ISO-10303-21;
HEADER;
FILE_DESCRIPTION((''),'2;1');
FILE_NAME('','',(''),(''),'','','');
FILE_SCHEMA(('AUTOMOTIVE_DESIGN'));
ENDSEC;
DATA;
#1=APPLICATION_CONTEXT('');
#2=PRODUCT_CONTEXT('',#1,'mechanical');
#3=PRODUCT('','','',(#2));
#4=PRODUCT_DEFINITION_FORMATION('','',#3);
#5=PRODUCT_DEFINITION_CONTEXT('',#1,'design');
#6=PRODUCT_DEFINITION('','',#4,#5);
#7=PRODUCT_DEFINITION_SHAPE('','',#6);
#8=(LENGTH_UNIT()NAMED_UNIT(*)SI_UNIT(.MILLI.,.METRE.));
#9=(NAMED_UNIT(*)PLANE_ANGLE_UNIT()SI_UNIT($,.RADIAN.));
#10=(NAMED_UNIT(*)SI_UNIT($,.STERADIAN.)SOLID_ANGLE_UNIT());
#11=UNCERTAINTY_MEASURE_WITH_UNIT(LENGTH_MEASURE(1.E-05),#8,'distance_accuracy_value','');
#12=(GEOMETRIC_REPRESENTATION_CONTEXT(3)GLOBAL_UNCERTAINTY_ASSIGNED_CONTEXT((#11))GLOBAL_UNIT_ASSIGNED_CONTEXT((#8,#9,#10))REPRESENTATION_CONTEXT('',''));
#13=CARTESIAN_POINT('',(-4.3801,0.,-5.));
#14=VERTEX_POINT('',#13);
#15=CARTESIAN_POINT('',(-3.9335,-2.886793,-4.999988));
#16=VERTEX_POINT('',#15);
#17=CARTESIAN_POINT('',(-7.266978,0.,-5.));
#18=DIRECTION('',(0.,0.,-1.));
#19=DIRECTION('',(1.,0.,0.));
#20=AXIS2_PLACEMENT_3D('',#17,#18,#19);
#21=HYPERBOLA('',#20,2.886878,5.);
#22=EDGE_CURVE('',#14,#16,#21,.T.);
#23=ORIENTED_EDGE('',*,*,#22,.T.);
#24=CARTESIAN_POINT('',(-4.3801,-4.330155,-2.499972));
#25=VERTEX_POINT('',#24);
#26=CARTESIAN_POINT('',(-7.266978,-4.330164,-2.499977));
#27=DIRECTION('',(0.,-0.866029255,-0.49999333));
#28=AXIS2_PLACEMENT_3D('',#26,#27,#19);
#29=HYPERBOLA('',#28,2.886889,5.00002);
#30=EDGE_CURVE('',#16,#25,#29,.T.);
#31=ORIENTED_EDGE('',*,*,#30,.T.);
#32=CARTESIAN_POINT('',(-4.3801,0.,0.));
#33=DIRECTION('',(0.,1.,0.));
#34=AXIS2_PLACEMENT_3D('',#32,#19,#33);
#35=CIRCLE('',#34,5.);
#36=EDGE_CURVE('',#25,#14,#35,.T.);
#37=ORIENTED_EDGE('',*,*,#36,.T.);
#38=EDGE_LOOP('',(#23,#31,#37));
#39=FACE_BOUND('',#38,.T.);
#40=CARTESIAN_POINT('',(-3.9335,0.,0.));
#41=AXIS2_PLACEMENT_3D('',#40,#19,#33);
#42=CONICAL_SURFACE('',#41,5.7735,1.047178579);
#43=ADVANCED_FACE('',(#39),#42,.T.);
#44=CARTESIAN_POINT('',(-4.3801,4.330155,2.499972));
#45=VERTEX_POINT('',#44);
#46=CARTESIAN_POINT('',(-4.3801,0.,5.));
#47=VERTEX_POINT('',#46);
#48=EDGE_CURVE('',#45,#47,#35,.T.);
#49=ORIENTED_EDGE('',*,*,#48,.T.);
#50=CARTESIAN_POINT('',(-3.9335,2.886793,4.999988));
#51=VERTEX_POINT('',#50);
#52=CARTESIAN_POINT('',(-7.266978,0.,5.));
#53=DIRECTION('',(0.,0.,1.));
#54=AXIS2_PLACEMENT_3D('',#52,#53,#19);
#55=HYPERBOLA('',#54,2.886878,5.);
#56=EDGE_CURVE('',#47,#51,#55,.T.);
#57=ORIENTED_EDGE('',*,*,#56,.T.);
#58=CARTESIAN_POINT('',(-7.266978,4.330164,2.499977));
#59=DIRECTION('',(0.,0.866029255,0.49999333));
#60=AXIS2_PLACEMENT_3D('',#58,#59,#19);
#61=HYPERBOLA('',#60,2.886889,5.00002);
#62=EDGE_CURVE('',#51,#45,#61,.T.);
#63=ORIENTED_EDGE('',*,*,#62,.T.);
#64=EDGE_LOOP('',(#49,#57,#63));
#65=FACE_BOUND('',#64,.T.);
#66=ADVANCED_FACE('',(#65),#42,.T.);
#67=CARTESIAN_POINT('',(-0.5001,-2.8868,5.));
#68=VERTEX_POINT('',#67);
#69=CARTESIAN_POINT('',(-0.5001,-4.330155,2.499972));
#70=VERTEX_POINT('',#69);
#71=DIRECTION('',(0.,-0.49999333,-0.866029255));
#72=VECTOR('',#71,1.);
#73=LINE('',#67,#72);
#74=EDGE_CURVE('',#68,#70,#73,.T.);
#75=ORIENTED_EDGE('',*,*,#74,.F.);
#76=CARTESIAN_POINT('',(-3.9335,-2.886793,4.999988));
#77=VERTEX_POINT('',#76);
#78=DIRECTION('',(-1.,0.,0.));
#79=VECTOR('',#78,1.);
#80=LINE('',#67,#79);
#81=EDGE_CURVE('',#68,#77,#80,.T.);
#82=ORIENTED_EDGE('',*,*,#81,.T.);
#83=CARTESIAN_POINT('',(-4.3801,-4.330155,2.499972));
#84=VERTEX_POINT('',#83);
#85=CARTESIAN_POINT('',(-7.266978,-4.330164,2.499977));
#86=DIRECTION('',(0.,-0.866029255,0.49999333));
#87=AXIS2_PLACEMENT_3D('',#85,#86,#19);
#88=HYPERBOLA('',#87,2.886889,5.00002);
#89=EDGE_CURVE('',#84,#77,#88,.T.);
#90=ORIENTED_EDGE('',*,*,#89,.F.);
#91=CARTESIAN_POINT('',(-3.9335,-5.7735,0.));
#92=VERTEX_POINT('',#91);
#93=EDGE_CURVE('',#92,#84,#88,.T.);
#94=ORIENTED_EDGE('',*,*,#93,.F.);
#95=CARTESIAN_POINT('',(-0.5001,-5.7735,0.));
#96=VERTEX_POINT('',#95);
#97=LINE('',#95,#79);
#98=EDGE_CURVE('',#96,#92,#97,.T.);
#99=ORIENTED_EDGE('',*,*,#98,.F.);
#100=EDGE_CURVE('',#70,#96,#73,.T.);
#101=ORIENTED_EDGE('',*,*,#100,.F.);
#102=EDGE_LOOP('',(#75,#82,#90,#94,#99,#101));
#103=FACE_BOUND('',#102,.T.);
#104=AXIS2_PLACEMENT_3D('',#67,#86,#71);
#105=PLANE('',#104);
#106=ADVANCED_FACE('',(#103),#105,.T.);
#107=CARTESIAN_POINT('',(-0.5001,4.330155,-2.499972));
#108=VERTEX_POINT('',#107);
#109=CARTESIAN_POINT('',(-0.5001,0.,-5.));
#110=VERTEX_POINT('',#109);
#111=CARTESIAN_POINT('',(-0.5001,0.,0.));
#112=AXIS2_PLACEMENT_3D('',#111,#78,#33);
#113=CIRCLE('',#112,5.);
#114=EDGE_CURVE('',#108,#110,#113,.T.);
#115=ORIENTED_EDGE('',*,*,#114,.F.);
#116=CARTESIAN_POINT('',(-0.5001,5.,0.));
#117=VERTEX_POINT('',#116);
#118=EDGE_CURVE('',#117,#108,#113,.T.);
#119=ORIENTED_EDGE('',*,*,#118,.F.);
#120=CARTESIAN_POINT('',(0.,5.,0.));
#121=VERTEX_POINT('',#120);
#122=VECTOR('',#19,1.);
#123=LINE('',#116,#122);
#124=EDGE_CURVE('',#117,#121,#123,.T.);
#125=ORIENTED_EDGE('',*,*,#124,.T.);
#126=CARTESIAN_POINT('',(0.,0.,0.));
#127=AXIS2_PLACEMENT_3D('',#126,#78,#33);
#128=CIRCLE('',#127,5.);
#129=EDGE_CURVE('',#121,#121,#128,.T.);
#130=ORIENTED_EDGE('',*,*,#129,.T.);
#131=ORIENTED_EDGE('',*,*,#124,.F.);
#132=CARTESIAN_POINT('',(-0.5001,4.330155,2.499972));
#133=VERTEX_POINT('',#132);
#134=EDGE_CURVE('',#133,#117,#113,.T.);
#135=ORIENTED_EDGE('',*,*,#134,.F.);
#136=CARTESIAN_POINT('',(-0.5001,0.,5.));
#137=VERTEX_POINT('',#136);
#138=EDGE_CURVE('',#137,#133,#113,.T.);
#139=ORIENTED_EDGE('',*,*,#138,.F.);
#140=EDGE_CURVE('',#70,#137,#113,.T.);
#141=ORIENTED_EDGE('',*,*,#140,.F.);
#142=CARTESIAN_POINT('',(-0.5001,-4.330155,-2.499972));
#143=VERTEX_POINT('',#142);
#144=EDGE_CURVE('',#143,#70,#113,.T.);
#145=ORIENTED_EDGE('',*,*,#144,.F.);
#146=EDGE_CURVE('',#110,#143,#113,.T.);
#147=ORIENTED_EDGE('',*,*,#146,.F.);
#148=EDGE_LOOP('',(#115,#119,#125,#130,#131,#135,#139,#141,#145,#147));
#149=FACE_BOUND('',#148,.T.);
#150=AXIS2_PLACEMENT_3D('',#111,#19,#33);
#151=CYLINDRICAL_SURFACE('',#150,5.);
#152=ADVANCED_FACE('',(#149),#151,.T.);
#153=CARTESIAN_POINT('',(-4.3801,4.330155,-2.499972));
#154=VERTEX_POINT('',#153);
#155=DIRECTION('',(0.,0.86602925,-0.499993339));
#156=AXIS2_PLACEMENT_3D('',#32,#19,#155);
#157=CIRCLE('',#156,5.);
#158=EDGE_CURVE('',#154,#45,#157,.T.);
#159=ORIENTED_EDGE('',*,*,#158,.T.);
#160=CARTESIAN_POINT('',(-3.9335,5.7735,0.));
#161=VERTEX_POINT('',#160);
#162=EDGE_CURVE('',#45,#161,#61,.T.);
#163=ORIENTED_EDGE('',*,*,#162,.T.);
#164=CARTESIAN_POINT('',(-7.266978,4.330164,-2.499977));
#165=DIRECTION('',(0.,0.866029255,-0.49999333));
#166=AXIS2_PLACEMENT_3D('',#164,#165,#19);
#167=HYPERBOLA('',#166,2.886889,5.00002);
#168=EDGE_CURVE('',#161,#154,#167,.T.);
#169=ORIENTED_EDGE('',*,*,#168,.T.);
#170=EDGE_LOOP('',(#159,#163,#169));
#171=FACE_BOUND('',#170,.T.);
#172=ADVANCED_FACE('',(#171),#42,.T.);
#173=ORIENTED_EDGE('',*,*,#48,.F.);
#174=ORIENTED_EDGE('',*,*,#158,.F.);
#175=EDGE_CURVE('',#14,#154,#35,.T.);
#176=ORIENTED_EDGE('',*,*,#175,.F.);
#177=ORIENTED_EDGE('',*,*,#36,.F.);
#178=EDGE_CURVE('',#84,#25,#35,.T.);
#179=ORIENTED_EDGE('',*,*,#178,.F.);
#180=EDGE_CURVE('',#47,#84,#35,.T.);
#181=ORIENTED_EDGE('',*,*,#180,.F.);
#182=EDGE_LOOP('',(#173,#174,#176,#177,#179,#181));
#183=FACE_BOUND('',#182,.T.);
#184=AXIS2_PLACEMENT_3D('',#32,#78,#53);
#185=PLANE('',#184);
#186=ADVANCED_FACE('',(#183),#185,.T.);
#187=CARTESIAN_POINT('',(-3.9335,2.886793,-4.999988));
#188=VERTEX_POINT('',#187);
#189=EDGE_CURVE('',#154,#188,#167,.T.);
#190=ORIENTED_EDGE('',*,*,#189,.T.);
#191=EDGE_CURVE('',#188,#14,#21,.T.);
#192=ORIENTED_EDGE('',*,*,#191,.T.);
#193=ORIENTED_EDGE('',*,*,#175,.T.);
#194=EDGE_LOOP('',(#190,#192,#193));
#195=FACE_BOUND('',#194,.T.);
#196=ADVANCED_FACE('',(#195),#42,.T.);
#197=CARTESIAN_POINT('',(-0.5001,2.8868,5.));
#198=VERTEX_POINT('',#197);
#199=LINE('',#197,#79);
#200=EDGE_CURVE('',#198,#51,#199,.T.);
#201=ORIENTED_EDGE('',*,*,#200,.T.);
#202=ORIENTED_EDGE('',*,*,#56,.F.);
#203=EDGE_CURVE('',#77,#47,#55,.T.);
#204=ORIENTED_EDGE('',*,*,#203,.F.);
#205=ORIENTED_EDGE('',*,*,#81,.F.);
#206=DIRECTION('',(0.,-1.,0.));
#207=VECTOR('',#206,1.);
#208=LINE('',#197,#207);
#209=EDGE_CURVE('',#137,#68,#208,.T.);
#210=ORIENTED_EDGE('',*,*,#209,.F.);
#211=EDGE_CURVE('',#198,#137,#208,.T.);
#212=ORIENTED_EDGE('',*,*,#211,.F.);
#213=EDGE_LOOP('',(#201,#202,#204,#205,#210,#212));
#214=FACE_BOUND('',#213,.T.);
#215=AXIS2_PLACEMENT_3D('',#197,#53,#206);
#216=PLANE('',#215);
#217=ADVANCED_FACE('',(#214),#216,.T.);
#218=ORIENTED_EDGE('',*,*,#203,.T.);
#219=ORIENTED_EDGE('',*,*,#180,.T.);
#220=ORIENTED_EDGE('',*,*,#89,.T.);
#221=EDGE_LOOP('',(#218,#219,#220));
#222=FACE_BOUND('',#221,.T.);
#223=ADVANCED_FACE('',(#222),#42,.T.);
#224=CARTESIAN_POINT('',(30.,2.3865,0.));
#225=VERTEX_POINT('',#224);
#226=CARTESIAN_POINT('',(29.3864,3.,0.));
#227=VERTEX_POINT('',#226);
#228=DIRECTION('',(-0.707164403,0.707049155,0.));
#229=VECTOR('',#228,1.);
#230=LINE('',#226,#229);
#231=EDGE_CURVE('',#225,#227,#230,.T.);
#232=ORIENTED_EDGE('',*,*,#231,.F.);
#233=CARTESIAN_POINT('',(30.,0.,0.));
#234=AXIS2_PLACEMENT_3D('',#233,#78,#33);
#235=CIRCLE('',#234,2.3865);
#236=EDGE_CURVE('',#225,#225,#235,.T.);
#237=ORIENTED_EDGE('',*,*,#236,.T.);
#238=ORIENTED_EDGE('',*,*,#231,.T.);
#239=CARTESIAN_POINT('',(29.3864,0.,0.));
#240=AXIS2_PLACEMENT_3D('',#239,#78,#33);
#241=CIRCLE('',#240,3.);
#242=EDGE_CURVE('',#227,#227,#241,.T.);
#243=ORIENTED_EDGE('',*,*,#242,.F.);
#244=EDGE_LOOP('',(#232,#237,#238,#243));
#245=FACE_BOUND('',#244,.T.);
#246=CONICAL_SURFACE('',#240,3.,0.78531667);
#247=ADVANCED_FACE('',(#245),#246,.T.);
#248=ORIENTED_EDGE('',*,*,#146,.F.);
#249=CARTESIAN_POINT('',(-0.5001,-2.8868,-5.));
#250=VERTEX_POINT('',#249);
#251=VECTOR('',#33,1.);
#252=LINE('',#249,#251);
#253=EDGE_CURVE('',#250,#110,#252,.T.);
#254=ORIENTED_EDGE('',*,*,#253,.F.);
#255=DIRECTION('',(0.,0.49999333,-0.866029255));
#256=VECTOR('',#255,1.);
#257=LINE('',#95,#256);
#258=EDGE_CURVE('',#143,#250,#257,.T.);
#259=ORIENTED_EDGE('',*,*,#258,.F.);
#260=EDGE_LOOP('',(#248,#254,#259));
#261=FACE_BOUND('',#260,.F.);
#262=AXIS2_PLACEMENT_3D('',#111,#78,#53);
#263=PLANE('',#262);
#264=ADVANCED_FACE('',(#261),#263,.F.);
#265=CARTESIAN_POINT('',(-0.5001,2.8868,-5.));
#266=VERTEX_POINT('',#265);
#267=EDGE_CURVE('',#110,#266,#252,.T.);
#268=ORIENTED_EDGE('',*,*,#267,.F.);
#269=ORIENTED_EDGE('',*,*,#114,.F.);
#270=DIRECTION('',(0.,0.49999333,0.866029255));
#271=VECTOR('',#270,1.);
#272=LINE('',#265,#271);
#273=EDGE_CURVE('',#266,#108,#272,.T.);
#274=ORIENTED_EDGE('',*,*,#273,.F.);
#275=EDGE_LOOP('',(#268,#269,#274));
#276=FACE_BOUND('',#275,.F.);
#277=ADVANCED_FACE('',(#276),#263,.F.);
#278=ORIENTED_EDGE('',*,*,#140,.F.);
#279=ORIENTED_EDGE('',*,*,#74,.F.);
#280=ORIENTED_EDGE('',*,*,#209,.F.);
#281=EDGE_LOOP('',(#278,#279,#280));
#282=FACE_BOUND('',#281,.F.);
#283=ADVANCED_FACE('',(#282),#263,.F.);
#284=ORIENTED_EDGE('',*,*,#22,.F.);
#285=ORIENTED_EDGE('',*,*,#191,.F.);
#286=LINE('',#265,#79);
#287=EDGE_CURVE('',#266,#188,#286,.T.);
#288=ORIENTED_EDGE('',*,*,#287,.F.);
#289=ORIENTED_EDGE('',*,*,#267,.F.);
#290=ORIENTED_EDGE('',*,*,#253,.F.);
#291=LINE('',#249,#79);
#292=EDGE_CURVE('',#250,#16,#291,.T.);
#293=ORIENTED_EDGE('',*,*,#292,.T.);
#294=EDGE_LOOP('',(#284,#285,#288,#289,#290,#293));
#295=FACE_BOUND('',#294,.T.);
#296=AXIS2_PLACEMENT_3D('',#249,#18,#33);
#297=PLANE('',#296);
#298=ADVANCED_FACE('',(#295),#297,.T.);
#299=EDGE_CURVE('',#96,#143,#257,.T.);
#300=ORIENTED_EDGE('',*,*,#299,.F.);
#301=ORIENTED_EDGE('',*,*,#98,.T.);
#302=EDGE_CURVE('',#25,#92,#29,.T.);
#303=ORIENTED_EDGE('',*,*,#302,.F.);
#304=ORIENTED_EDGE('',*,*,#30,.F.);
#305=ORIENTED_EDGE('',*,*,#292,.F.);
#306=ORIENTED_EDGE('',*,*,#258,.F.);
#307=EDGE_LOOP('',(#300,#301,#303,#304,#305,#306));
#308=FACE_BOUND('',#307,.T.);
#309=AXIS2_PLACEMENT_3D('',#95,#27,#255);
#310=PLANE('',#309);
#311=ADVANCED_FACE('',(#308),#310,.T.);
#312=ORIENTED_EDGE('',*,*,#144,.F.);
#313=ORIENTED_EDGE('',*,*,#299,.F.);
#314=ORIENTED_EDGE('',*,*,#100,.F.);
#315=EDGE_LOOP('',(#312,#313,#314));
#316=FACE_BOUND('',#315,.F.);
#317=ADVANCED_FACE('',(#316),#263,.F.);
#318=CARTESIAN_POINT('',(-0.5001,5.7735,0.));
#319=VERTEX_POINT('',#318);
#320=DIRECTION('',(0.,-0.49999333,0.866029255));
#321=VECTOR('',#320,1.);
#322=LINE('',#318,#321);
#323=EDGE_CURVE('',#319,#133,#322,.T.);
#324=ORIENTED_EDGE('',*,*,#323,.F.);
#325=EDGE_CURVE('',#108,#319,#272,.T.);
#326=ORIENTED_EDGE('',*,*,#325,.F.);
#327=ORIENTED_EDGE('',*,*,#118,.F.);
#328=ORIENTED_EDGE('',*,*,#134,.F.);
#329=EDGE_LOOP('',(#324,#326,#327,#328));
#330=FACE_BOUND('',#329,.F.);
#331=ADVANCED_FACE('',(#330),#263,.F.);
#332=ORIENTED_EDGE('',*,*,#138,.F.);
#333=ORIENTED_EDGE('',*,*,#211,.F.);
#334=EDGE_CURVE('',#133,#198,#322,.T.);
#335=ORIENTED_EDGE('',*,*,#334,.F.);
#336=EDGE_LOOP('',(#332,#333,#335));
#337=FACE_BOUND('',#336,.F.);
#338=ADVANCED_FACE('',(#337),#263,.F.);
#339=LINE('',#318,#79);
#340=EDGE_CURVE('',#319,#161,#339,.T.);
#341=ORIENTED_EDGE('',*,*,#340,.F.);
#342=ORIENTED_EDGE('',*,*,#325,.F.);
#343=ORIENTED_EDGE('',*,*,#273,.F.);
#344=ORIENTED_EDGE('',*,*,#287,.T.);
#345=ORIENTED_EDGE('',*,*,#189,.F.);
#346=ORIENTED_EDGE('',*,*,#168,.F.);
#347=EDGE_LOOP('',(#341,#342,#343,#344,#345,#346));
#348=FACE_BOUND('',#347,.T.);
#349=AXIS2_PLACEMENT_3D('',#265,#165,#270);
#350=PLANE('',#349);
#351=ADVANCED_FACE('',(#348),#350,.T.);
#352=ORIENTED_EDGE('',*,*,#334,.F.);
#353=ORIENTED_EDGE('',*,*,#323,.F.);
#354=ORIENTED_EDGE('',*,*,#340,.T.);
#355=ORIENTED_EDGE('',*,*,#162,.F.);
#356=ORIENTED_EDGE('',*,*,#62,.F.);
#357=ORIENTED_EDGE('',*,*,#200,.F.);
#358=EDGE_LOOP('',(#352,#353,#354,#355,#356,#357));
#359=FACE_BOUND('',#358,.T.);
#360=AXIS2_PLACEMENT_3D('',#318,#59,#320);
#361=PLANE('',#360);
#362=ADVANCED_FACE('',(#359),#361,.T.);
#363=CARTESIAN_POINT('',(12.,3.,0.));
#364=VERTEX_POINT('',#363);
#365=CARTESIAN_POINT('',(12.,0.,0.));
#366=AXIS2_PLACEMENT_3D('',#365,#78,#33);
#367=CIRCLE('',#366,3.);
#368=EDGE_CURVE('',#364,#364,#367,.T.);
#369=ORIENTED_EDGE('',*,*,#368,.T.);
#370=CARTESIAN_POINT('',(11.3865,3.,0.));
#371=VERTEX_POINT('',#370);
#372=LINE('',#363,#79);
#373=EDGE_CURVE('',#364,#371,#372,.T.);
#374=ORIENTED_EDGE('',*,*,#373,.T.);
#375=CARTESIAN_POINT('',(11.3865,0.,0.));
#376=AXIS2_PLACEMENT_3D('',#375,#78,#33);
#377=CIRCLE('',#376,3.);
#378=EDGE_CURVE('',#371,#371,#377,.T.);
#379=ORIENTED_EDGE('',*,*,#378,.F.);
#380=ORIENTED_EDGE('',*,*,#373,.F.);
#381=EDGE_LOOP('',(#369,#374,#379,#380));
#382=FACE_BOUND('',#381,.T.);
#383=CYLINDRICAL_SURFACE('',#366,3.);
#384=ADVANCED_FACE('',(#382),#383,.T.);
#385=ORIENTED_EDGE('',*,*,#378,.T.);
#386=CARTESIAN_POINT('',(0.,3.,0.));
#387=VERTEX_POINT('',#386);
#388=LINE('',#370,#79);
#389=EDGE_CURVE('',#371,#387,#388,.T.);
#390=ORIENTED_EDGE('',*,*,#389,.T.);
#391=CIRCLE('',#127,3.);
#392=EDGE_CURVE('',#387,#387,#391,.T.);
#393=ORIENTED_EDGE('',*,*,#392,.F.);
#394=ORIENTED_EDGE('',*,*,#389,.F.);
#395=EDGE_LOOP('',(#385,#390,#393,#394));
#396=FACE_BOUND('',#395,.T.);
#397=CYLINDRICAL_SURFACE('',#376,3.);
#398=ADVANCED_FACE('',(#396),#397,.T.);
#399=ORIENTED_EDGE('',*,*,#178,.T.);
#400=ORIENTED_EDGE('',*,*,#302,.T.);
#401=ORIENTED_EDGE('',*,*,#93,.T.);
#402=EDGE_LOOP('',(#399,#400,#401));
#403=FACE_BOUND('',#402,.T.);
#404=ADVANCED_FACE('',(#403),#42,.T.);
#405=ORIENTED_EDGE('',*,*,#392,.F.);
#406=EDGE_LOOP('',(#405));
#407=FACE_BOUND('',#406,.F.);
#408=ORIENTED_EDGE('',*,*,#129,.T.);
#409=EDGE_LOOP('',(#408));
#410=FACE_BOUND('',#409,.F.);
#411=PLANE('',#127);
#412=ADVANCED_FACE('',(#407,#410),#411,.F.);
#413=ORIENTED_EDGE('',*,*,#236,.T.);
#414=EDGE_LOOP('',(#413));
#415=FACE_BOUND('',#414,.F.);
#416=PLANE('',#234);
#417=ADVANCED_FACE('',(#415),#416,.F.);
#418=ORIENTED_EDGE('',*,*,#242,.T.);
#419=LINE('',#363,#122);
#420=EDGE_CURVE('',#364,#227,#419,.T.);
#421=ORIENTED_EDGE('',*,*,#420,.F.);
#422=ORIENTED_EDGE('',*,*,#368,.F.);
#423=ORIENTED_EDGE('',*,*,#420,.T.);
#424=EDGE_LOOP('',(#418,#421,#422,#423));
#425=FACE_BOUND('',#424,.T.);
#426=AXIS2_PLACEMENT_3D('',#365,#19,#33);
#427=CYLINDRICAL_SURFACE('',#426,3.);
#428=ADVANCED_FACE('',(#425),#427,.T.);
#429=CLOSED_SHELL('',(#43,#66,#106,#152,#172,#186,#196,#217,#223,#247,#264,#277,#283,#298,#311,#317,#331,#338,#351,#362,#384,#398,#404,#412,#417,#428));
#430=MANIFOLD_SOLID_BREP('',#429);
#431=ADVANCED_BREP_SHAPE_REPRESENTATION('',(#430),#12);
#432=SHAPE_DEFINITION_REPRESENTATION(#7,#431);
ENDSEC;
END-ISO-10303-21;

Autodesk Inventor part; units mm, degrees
ref_plane "YZ Plane" through (0, 0, 0) normal (1, 0, 0) x (0, 1, 0)
ref_plane "XZ Plane" through (0, 0, 0) normal (0, 1, 0) x (-1, 0, 0)
sketch "Sketch1" plane through (0, 0, 0) normal (0, 0, 1) x (1, 0, 0)
  line L0 (0, 5) -> (0, 3)
  line L1 (12, 3) -> (30, 3)
  line L2 (30, 3) -> (30, 0)
  line L3 (30, 0) -> (-0.5001, 0)
  line L4 (-6.6001, 0) -> (36.1, 0) projected
  line L5 (-0.5001, 0) -> (-0.5001, 5)
  line L6 (-0.5001, 5) -> (0, 5)
  line L7 (12, 3) -> (11.3865, 3)
  line L8 (11.3865, 3) -> (0, 3)
  line L9 (0, -1) -> (0, 6) projected
  dimension "d0" = 30
  dimension "d1" = 18
  dimension "d2" = 6
  dimension "d9" = 0.5001
  dimension "d10" = 10
  dimension "d13" = 0.6136
  dimension "d14" = 6
revolve "Body" add sketch "Sketch1" angle 360 about axis through (30, 0, 0) along (-1, 0, 0)
sketch "Sketch2" plane through (-0.5001, 0, 0) normal (-1, 0, 0) x (0, 0, 1)
  line L0 (0, 5.7735) -> (5, 2.8868)
  line L1 (5, 2.8868) -> (5, -2.8868)
  line L2 (5, -2.8868) -> (0, -5.7735)
  line L3 (0, -5.7735) -> (-5, -2.8868)
  line L4 (-5, -2.8868) -> (-5, 2.8868)
  line L5 (-5, 2.8868) -> (0, 5.7735)
  point P0 (0, 0)
  point P1 (0, 0)
  dimension "d11" = 10
extrude "Head" add sketch "Sketch2" along normal blind 3.88
sketch "Sketch4" plane through (0, 0, 0) normal (0, 0, 1) x (1, 0, 0)
  line L0 (-4.3801, 5) -> (-4.3801, 5.7735)
  line L1 (-4.3801, 5.7735) -> (-3.9335, 5.7735)
  line L2 (-3.9335, 5.7735) -> (-4.3801, 5)
  line L3 (-5.1561, 0) -> (0.2759, 0) projected
  line L4 (-0.5001, 5.7735) -> (-4.3801, 5.7735) projected
  line L5 (-4.3801, 2.8868) -> (-4.3801, 5.7735) projected
  dimension "d5" = 30
  dimension "d19" = 10
revolve "Chamfer1" cut sketch "Sketch4" angle 360 about axis through (-10, 0, 0) along (1, 0, 0)
thread "Thread" size "M6x1" class "6g" standard "ISO Metric profile" length 18
chamfer "Chamfer2" distance 0.6135 distance2 0.6136 1 edges at (30, -3, 0) measured on face at (30, 1.1079, -0.4377)
ref_plane "Work Plane1" through (1.525, 0, 0) normal (0, 0, 1) x (1, 0, 0)
equation "\"d11\" = SW"
equation "\"d3\" = KOH - SD"
equation "\"d15\" = GEL"
equation "\"d6\" = -0.5 * SPD + 0.5 * GD"
equation "\"d0\" = NLG"
equation "\"d1\" = GEL"
equation "\"d2\" = GD"
equation "\"d10\" = SD2"
equation "\"d14\" = BDM"
equation "\"d5\" = ANG1"
equation "\"d19\" = SW0"
equation "\"NLG\" = 30"
equation "\"GD\" = NND"
equation "\"BDM\" = NND"
equation "\"KOH\" = 4.38"
equation "\"GEL\" = 18"
equation "\"SW\" = 10"
equation "\"SW0\" = SW"
equation "\"SPD\" = NND - 1.2269 * PTC"
equation "\"SD2\" = SW"
equation "\"SD\" = 0.5"
equation "\"ANG1\" = 30deg"
equation "\"GAL\" = 0.61345 * PTC"
equation "\"GUL\" = 0.61345 * PTC"
equation "\"RR\" = 0.25"
equation "\"WFT\" = SD"
equation "\"GD1\" = THREADDIA - 1.2269 * PTC"
equation "\"THREADDIA\" = 6"
equation "\"TOA\" = 30deg"
equation "\"FAWI\" = 45deg"
equation "\"PTC\" = 1"
equation "\"NND\" = 6"
equation "\"E0\" = 1.155 * SW"
properties part number "AS 1111 - M6 x 30" material "Steel, Mild"
